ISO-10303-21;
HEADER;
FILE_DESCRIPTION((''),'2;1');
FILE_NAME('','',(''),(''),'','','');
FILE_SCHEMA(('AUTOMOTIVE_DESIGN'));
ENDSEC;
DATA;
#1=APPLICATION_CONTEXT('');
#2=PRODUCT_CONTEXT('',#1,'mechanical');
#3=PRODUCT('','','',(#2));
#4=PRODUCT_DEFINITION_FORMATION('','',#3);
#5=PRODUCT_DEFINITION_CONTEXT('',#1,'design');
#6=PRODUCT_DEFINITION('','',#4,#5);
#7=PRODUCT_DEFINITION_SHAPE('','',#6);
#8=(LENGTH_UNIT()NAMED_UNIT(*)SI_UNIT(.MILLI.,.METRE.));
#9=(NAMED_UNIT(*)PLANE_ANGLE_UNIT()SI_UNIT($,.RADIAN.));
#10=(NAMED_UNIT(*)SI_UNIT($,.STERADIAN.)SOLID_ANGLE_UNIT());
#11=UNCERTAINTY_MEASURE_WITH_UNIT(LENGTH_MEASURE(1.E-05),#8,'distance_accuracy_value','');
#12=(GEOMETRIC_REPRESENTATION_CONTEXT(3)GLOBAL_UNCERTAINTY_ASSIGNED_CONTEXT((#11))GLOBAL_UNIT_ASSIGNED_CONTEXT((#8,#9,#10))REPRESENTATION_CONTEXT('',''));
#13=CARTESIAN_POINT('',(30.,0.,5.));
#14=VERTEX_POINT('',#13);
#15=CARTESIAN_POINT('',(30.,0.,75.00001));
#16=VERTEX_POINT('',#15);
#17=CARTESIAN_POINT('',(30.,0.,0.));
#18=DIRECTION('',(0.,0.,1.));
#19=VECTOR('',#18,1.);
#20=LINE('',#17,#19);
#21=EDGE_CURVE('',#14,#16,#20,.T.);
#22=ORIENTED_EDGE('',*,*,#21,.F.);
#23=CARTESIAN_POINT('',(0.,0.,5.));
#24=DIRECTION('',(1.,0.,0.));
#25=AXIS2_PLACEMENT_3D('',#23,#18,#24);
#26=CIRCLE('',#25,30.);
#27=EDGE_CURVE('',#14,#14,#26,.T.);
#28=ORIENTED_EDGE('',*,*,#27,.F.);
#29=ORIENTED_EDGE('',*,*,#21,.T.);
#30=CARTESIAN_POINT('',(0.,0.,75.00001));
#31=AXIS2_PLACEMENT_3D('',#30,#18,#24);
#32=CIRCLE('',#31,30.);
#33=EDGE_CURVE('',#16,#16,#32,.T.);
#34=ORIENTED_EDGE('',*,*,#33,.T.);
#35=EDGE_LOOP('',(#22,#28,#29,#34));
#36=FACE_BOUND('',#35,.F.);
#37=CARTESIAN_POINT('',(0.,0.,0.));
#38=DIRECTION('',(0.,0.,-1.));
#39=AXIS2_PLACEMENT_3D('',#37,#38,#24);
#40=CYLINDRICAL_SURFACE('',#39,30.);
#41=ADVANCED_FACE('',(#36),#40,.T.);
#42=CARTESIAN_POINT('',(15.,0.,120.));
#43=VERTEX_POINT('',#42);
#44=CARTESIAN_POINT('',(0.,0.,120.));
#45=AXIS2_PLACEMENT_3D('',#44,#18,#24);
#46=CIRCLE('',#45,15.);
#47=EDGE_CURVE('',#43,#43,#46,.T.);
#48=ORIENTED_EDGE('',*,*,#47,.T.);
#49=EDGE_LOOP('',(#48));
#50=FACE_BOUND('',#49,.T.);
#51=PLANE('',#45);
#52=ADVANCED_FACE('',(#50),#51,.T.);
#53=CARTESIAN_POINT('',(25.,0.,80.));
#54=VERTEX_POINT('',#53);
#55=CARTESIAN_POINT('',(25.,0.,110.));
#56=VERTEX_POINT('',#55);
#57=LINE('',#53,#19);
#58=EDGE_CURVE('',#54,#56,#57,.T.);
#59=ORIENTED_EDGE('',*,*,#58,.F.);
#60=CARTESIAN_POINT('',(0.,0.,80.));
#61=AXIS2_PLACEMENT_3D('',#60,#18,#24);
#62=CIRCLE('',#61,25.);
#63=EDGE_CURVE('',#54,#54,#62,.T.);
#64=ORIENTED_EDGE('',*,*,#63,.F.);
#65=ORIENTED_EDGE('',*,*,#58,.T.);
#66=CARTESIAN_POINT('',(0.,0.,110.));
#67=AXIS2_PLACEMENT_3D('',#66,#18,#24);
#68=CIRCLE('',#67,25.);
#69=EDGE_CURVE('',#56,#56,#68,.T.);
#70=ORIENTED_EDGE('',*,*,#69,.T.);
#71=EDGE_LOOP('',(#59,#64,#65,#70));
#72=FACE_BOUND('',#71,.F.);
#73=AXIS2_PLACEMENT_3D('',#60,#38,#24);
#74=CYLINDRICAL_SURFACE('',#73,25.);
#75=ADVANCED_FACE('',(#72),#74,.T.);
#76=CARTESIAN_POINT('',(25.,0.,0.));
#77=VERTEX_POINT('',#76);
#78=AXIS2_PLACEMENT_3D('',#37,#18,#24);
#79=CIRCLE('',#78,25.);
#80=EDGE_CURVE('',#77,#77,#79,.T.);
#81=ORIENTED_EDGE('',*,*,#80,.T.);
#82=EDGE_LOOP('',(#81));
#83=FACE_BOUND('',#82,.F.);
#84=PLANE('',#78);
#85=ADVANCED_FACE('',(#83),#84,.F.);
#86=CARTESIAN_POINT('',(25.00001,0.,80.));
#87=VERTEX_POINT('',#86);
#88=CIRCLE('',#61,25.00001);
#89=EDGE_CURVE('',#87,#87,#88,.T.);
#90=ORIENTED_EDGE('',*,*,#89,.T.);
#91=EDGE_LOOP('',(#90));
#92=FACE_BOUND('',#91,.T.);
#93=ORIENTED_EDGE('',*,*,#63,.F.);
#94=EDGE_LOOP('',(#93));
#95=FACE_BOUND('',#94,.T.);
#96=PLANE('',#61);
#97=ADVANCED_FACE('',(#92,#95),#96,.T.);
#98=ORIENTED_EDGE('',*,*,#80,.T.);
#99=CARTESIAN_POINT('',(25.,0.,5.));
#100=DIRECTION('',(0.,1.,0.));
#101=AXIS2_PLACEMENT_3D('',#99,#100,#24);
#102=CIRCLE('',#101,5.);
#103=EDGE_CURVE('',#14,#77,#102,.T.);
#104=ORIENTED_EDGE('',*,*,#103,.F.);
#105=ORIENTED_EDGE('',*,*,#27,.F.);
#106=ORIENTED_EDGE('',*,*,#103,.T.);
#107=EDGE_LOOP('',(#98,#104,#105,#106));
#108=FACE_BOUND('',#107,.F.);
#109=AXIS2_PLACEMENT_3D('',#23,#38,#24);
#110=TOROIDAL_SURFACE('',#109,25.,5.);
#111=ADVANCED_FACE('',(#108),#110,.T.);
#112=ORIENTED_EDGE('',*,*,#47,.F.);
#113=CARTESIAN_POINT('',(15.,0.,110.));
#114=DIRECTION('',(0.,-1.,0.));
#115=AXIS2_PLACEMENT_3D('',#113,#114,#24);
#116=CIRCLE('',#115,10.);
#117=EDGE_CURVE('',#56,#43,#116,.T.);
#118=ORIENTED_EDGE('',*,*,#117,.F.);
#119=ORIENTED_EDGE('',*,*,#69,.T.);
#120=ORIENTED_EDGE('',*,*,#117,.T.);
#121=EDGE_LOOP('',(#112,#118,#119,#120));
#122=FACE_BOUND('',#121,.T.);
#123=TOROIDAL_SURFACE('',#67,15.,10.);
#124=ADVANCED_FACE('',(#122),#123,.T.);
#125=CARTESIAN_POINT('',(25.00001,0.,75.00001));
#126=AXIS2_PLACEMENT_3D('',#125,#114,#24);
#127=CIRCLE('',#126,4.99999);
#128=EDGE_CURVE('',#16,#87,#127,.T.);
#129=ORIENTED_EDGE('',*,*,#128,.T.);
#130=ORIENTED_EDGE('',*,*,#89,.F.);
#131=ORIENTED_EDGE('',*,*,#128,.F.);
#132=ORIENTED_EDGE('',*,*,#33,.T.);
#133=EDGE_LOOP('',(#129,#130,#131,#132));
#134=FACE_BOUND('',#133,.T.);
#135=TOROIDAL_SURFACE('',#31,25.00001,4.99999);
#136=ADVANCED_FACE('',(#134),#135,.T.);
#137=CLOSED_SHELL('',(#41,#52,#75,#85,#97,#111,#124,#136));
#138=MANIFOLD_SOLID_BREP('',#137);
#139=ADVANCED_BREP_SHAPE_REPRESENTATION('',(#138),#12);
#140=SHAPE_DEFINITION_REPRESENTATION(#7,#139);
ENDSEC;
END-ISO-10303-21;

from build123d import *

# Parameters (mm, degrees)
F0_R     = 30
F1_DEPTH = 80
F2_R     = 25
F3_DEPTH = 40
F4_R     = 4.99999
F5_R     = 5
F6_R     = 10


# Not quite as in the source:
# - a fillet or chamfer is up to 0.001 mm smaller than in the source, because OpenCascade refuses the exact size


with BuildPart() as f1:
    # F0 (on Top) → F1 (new body)
    with BuildSketch(Plane.XY):
        Circle(F0_R)
    extrude(amount=F1_DEPTH)

    # F2 (on face) → F3 (join)
    with BuildSketch(Plane.XY.offset(80)):
        Circle(F2_R)
    extrude(amount=F3_DEPTH)

    # F4 (radius 5 in the source; OpenCascade refuses exactly that, so slightly less here)
    f4_edges = [f1.edges().sort_by_distance(p)[0] for p in [
        (-30, 0, 80),
    ]]
    fillet(f4_edges, radius=F4_R)

    # F5
    f5_edges = [f1.edges().sort_by_distance(p)[0] for p in [
        (-30, 0, 0),
    ]]
    fillet(f5_edges, radius=F5_R)

    # F6
    f6_edges = [f1.edges().sort_by_distance(p)[0] for p in [
        (-25, 0, 120),
    ]]
    fillet(f6_edges, radius=F6_R)


solid = f1.part
